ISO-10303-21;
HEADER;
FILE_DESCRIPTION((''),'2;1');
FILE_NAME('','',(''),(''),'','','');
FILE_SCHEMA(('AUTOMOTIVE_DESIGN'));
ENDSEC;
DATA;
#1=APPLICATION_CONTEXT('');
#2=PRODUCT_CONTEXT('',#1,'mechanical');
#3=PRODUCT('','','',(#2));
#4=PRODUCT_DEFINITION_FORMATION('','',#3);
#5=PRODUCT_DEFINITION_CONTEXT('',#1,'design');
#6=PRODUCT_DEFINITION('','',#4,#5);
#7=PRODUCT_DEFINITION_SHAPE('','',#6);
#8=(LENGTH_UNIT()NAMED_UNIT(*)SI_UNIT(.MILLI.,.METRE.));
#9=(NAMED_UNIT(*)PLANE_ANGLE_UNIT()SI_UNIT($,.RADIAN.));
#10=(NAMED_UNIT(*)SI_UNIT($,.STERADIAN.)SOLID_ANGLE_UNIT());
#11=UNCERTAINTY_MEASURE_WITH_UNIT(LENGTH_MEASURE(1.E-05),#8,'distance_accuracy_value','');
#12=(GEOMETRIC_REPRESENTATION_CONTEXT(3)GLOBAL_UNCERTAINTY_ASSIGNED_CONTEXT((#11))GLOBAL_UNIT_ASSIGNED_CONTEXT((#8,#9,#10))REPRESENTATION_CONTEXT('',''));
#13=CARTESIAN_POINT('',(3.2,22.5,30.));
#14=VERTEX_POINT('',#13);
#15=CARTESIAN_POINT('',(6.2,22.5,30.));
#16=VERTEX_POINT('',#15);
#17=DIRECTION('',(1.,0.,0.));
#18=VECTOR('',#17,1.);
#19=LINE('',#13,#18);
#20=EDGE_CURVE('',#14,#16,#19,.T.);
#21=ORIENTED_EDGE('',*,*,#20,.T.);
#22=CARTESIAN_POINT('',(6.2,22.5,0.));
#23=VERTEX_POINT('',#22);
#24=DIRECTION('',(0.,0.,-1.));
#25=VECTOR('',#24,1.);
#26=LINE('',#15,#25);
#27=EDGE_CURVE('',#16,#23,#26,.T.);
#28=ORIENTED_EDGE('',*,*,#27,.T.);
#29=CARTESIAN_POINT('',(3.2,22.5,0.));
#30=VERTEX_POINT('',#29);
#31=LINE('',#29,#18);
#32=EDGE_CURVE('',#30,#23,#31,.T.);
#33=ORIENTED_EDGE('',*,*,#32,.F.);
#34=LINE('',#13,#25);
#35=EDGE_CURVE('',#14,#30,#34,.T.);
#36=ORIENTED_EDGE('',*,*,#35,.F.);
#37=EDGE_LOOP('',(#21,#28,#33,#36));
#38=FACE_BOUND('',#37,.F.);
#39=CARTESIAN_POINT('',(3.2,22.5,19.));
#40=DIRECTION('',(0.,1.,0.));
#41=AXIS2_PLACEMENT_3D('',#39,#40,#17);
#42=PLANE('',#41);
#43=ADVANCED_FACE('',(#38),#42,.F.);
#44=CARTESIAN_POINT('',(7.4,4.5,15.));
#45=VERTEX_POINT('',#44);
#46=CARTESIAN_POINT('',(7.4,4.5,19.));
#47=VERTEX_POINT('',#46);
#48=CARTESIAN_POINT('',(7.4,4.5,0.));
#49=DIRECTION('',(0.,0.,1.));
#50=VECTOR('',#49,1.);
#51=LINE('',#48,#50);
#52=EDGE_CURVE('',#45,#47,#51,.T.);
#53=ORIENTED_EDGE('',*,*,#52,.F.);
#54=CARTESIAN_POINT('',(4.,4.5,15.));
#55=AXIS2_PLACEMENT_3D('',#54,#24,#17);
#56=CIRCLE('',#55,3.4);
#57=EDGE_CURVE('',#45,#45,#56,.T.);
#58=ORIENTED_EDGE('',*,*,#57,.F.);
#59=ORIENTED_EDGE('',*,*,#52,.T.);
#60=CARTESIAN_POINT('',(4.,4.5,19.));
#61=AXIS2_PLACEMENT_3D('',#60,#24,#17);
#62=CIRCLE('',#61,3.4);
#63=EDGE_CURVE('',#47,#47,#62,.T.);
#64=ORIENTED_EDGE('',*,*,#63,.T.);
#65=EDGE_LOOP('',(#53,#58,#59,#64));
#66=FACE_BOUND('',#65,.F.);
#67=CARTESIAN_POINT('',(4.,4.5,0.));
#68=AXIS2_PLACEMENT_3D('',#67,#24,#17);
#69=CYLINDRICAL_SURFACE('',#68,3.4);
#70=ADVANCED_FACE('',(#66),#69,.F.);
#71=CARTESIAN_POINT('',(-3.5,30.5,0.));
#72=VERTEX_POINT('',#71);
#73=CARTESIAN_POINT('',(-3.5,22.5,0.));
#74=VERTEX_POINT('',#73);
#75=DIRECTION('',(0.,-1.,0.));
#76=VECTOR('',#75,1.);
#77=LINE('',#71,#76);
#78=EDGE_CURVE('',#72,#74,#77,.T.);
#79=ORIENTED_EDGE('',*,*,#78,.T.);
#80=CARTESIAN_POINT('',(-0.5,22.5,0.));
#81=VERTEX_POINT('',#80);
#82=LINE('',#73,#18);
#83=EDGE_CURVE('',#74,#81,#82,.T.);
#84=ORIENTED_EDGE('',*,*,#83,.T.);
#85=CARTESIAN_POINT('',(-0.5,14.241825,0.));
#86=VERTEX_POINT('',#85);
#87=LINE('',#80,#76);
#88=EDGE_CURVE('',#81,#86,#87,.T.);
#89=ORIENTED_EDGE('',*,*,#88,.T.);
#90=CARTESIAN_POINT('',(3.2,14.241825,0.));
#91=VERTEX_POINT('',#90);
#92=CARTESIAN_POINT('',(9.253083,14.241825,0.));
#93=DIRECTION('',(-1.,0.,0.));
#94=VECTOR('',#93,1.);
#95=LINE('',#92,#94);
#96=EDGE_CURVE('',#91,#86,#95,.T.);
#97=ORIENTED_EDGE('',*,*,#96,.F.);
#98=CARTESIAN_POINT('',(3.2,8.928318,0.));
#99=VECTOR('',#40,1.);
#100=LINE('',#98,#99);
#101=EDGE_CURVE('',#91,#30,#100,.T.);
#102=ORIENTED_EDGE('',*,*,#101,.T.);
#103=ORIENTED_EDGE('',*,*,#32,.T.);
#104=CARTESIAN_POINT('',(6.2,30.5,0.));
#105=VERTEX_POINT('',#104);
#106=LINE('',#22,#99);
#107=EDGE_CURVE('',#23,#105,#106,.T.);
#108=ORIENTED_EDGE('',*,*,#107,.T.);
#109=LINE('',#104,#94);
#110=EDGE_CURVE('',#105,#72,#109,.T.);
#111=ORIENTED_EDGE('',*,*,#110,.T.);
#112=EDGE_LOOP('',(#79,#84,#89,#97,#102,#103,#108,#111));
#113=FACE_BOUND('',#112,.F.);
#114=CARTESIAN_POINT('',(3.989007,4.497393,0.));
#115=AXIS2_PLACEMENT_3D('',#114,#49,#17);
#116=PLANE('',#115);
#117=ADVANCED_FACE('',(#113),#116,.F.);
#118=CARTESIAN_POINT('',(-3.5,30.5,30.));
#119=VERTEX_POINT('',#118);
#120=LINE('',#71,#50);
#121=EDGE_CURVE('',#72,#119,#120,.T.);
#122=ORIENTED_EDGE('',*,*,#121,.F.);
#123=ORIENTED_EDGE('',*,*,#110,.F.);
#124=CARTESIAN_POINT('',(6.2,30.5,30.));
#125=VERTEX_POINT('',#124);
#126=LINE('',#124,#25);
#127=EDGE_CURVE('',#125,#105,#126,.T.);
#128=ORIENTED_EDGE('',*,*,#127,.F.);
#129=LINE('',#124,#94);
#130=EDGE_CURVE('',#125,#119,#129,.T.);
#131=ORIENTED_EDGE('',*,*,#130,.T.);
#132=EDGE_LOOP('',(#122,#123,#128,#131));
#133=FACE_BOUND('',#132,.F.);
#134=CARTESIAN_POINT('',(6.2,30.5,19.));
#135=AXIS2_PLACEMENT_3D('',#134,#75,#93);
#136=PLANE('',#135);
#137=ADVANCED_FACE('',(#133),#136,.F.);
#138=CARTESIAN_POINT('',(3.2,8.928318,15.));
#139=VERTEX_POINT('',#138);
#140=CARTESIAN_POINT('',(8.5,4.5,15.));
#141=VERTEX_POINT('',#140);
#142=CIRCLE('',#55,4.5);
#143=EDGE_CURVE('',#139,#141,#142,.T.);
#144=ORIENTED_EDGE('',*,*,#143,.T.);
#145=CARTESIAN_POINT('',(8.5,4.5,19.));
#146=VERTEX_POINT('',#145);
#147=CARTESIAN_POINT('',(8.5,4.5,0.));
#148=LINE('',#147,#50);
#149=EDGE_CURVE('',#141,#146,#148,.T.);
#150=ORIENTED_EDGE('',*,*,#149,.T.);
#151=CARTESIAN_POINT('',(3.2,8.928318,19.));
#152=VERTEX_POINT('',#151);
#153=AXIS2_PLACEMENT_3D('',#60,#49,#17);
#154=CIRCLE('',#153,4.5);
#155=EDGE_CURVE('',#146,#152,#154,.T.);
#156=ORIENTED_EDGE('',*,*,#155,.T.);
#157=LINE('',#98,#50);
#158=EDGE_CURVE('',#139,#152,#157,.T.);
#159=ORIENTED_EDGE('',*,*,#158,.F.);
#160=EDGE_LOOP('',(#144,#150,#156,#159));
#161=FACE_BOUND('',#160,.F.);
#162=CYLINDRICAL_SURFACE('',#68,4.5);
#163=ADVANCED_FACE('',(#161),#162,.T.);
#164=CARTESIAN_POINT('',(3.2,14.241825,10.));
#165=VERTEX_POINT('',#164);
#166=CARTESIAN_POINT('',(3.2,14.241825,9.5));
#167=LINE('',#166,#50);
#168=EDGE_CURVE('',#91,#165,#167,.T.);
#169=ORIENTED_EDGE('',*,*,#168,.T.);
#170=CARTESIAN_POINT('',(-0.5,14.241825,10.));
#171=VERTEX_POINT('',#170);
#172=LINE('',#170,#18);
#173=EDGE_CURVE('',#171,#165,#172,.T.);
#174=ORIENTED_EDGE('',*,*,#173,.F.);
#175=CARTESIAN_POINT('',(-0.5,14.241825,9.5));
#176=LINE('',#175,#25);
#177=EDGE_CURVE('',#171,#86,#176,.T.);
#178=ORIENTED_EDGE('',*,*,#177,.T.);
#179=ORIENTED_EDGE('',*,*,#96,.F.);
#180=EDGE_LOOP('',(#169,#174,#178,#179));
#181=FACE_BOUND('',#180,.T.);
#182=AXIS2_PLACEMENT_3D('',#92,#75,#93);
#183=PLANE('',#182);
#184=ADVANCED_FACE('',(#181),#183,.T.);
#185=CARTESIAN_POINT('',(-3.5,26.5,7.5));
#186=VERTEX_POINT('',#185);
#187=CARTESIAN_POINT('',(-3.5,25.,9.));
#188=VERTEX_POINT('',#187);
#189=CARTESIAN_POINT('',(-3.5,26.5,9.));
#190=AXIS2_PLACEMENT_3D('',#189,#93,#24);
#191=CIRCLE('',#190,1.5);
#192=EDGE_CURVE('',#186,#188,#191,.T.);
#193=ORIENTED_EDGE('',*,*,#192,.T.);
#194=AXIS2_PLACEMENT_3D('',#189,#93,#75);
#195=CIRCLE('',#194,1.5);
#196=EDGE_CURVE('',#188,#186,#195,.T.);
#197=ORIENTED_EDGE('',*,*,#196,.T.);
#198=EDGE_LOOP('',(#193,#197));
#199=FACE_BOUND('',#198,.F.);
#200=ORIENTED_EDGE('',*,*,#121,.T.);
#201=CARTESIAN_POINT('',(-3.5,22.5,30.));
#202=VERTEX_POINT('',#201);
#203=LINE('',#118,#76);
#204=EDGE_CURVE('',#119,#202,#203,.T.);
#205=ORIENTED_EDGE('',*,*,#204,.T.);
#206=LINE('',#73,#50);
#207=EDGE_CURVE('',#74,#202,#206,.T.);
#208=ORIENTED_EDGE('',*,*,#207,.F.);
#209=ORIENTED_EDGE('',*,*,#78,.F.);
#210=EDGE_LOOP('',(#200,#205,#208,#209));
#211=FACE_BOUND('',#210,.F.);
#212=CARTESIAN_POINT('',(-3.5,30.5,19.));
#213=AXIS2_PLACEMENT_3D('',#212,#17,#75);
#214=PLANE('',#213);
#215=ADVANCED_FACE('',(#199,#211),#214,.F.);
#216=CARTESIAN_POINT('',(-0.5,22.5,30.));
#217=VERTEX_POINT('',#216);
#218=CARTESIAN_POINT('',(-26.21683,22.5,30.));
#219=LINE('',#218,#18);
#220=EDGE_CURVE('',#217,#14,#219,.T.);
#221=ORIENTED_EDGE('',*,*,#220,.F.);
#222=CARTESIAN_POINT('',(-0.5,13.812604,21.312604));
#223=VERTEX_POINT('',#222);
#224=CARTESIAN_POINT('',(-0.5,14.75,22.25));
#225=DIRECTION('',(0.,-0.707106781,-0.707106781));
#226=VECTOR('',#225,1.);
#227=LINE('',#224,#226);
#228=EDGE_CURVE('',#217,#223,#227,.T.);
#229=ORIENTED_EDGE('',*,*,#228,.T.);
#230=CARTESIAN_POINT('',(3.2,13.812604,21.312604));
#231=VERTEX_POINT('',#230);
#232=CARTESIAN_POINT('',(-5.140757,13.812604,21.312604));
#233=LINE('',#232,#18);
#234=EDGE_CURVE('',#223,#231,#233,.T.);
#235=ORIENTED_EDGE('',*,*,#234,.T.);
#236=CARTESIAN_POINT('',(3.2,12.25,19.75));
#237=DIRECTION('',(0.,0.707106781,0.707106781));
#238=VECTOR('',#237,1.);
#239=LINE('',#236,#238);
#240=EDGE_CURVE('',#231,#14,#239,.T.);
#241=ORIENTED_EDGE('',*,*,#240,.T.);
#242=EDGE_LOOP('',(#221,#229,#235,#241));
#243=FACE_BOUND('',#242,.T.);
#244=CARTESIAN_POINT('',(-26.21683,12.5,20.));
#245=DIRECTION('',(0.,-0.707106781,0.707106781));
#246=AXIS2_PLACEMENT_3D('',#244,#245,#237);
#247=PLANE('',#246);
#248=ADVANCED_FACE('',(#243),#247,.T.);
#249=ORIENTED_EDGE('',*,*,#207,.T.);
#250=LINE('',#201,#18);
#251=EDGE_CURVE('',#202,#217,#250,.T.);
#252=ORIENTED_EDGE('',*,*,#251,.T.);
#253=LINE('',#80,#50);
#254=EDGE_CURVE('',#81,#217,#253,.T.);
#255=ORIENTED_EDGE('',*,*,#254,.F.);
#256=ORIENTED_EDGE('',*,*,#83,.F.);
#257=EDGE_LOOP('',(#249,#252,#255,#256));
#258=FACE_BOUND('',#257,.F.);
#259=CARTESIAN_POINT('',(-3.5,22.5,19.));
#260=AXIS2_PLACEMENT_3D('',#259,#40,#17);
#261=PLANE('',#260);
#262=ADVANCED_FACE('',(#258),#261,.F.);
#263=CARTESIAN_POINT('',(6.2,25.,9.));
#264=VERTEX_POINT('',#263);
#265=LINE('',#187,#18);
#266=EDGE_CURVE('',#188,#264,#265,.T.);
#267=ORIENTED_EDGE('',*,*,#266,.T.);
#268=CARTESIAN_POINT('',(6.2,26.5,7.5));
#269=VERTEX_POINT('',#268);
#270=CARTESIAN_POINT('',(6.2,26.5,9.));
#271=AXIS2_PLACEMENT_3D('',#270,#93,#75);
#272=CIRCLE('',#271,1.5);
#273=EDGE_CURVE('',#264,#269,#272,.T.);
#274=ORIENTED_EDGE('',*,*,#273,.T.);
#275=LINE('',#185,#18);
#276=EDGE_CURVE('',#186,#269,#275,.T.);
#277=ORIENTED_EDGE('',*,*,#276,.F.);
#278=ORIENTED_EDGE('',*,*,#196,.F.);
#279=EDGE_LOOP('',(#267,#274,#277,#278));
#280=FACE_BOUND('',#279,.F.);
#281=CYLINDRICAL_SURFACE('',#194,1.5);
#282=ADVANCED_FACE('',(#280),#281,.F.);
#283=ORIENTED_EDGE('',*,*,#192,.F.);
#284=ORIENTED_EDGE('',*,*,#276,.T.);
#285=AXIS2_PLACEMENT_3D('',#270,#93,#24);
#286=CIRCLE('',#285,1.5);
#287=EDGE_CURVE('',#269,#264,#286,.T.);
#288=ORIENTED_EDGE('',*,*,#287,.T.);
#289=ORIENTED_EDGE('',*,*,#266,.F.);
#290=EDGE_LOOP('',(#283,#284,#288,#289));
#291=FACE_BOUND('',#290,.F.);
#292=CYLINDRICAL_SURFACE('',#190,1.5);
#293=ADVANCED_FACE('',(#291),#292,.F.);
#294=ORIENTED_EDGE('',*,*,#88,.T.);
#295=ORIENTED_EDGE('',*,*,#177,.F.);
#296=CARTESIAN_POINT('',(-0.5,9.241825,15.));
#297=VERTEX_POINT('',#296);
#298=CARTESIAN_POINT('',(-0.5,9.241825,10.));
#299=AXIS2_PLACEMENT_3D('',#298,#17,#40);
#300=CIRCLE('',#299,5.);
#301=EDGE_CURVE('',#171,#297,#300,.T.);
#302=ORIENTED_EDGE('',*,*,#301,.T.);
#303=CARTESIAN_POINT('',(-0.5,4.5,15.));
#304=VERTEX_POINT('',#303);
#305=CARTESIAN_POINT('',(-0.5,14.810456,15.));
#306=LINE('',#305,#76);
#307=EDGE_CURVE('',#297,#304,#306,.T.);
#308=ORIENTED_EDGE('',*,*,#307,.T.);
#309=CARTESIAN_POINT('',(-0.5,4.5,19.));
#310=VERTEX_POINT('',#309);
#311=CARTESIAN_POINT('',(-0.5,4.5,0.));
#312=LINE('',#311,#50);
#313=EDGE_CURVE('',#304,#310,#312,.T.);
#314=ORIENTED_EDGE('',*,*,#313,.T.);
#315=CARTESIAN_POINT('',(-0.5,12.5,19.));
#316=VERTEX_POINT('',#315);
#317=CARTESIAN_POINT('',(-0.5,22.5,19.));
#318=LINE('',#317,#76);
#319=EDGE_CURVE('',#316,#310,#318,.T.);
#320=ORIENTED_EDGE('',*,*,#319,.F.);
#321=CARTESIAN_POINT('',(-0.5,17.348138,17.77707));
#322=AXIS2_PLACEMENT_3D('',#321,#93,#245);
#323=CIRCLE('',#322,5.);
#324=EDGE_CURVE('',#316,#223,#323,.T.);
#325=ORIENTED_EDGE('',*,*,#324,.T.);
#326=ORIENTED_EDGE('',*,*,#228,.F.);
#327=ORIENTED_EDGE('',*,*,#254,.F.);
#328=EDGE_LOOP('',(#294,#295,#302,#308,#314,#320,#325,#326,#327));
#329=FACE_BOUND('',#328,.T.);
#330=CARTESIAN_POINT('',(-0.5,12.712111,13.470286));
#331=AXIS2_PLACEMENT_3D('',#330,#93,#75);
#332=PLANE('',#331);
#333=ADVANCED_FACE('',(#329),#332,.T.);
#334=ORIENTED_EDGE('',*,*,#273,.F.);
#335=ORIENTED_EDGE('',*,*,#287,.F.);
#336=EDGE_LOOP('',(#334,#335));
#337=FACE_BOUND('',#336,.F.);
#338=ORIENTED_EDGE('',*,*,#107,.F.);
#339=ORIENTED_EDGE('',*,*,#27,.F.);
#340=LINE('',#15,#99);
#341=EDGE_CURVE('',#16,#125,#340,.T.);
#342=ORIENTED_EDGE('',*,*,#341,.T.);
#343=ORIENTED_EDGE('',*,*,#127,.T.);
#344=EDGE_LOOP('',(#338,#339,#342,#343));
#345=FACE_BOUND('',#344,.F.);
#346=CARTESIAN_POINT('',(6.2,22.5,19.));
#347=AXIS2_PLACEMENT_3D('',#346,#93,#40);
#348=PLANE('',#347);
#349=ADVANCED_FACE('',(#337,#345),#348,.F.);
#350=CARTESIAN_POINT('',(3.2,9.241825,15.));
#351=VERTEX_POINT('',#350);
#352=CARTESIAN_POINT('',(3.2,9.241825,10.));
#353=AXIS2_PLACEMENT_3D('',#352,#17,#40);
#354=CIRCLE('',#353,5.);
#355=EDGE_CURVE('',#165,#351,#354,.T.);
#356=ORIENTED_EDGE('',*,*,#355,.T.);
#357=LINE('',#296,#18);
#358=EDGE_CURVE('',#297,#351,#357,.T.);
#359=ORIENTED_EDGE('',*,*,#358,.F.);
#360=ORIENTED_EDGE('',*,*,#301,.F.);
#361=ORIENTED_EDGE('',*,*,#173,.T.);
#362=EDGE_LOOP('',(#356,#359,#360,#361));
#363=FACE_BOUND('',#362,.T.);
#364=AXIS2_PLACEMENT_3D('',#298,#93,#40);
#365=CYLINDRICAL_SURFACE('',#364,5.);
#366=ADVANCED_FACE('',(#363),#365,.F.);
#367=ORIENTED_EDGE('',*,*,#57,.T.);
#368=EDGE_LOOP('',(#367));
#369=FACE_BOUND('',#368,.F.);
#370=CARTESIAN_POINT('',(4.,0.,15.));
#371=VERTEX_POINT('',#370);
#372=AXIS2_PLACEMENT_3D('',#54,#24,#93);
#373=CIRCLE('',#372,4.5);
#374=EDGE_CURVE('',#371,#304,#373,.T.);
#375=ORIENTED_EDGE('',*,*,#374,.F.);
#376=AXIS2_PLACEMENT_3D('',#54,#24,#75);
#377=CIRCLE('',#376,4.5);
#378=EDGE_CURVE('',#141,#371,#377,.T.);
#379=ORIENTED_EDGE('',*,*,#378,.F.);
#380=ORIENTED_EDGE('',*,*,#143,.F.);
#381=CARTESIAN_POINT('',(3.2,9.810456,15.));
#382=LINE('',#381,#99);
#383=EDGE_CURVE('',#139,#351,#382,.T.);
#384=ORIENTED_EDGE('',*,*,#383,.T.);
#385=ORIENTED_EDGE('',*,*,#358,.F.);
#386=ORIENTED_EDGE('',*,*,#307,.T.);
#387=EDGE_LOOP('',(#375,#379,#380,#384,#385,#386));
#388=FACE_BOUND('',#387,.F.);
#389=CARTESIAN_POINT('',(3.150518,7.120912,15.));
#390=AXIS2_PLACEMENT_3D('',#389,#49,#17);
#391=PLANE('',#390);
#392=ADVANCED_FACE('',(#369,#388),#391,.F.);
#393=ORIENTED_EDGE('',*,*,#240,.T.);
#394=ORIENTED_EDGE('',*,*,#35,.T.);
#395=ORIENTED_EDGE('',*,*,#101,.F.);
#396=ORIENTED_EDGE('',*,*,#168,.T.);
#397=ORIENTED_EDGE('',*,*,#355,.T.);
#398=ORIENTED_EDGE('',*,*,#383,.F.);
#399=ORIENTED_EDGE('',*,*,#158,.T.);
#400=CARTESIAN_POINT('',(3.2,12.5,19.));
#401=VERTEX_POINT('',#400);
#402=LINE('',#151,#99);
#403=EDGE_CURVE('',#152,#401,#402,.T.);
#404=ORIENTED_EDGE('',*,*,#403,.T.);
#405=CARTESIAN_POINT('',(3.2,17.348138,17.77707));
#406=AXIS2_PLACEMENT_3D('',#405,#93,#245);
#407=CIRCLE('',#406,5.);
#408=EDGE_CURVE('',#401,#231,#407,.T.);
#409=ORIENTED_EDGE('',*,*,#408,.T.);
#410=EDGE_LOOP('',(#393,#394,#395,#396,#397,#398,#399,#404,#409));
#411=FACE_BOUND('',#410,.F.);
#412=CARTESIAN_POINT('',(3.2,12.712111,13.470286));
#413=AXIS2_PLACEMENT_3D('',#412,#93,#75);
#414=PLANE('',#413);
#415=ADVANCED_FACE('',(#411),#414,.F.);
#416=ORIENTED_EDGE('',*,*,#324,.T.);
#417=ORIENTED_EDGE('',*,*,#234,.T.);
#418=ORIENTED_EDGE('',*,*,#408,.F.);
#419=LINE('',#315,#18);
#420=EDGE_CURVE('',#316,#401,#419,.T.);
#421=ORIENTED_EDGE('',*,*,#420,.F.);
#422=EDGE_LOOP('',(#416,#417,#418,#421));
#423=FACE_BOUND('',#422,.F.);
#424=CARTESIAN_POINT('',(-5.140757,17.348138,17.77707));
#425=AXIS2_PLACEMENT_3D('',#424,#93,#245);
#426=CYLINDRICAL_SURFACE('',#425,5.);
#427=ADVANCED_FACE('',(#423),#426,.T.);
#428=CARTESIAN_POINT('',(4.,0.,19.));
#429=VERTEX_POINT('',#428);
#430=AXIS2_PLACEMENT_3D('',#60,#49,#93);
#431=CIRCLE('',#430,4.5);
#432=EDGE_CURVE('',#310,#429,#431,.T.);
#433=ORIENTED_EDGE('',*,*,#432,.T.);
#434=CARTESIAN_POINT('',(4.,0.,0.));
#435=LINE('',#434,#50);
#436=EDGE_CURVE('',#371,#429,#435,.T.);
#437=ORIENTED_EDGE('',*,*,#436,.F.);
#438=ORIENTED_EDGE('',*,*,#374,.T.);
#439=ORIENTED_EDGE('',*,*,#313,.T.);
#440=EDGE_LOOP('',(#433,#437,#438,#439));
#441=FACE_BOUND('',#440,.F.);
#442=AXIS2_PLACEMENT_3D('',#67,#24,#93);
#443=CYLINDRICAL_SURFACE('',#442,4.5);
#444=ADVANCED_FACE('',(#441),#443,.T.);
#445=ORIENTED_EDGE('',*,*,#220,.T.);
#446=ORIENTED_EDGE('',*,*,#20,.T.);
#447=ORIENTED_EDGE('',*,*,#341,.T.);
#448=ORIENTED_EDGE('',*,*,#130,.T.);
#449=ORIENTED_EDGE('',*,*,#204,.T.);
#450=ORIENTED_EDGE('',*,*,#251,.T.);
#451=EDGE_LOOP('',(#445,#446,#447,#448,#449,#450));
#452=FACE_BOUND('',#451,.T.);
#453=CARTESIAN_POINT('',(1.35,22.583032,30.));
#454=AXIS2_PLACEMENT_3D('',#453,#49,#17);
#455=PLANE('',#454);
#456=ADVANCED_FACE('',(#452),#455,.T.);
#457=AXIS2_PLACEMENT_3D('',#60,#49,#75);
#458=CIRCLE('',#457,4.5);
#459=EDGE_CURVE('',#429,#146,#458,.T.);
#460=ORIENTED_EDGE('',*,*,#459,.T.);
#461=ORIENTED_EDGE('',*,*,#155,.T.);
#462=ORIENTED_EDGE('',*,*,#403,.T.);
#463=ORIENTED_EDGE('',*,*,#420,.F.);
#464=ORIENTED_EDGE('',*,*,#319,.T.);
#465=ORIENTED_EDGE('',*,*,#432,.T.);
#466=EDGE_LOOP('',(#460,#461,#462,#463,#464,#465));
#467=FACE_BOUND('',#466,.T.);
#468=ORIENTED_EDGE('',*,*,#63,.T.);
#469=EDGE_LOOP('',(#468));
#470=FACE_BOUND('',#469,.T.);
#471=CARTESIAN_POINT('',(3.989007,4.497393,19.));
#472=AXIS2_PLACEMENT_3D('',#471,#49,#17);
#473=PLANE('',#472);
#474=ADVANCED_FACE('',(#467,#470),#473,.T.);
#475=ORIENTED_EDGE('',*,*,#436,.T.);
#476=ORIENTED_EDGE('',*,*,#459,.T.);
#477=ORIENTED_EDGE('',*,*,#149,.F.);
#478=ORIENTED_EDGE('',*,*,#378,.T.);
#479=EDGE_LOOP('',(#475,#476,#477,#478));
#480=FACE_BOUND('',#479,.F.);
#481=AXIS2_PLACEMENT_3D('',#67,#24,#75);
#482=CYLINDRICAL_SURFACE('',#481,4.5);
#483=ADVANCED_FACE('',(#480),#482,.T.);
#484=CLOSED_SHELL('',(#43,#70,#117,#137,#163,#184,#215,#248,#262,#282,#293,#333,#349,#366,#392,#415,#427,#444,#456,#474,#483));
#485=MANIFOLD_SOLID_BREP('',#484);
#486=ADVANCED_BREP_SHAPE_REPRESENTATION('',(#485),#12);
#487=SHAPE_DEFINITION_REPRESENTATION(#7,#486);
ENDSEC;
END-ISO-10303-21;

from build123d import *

# Parameters (mm, degrees)
F1_DEPTH     = 19
F3_DEPTH     = 11
F4_R         = 3.4
F5_DEPTH     = 25
F8_DEPTH     = 25
F9_T1_DEPTH  = 55.1336597593
F10_DEPTH    = 15
F11_T1_DEPTH = 3.7
F11_T3_DEPTH = 12.9815131525


# Not quite as in the source:
# - a fillet or chamfer that OpenCascade refuses, or shapes differently, is made with other operations: its cross-section is extruded or revolved along the edge and cut away or added


with BuildPart() as f1:
    # F0 (on Top) → F1 (new body)
    with BuildSketch(Plane.XY):
        with BuildLine():
            ThreePointArc((4, 0), (7.1819805153, 1.3180194847), (8.5, 4.5))
            ThreePointArc((8.5, 4.5), (6.8853076093, 7.95325933), (3.2, 8.9283179651))
            ThreePointArc((3.2, 8.9283179651), (0.54674067, 7.3853076093), (-0.5, 4.5))
            ThreePointArc((-0.5, 4.5), (0.8180194847, 1.3180194847), (4, 0))
        make_face()
        with BuildLine():
            ThreePointArc((-0.5, 4.5), (0.54674067, 7.3853076093), (3.2, 8.9283179651))
            Line((3.2, 8.9283179651), (3.2, 22.5))
            Line((3.2, 22.5), (6.2, 22.5))
            Line((6.2, 22.5), (6.2, 30.5))
            Line((6.2, 30.5), (-3.5, 30.5))
            Line((-3.5, 30.5), (-3.5, 22.5))
            Line((-3.5, 22.5), (-0.5, 22.5))
            Line((-0.5, 22.5), (-0.5, 4.5))
        make_face()
    extrude(amount=F1_DEPTH)

    # F2 (on face) → F3 (join)
    with BuildSketch(Plane.XY.offset(19)):
        Polygon((6.2, 30.5), (-3.5, 30.5), (-3.5, 22.5), (-0.5, 22.5), (-0.5, 12.5), (3.2, 12.5), (3.2, 22.5), (6.2, 22.5), align=None)
    extrude(amount=F3_DEPTH)

    # F4 (on face) → F5 (cut)
    with BuildSketch(Plane(origin=(0, 0, 0), x_dir=(1, 0, 0), z_dir=(0, 0, -1))):
        with Locations((4, -4.5)):
            Circle(F4_R)
    extrude(amount=-F5_DEPTH, mode=Mode.SUBTRACT)

    # F7 (on face) → F8 (cut)
    with BuildSketch(Plane(origin=(-3.5, 0, 0), x_dir=(0, -1, 0), z_dir=(-1, 0, 0))):
        with BuildLine():
            ThreePointArc((-26.5, 7.5), (-25.4393398282, 7.9393398282), (-25, 9))
            ThreePointArc((-25, 9), (-27.5606601718, 10.0606601718), (-26.5, 7.5))
        make_face()
    extrude(amount=-F8_DEPTH, mode=Mode.SUBTRACT)

    # F9: chamfer of 10 on 1 edges, made by hand

    # F9_s2 → F9_t1 (cut)
    with BuildSketch(Plane.YZ.offset(-26.2168298797)):
        Polygon((12.5, 20), (22.5, 30), (12.5, 30), align=None)
    extrude(amount=F9_T1_DEPTH, mode=Mode.SUBTRACT)

    # F6 (on Top) → F10 (cut)
    with BuildSketch(Plane.XY):
        Polygon((-2.952047158, 0), (0, 0), (4.1492179482, 0), (5.4492179482, 0), (9.2530830997, 0), (9.2530830997, 9.0487509014), (9.2530830997, 14.2418248579), (-2.952047158, 14.2418248579), align=None)
    extrude(amount=F10_DEPTH, mode=Mode.SUBTRACT)

    # F11: fillet of radius 5 on 2 edges, made by hand

    # F11_s2 → F11_t1 (join)
    with BuildSketch(Plane.YZ.offset(-0.5)):
        with BuildLine():
            ThreePointArc((14.2418248579, 10), (12.7773587638, 13.5355339059), (9.2418248579, 15))
            Line((9.2418248579, 15), (14.2418248579, 15))
            Line((14.2418248579, 15), (14.2418248579, 10))
        make_face()
    extrude(amount=F11_T1_DEPTH)

    # F11_s4 → F11_t3 (cut)
    with BuildSketch(Plane.YZ.offset(-5.1407565762)):
        with BuildLine():
            ThreePointArc((13.812604178, 21.312604178), (12.9997448715, 20.2451619378), (12.5, 19))
            Line((12.5, 19), (12.5, 20))
            Line((12.5, 20), (13.812604178, 21.312604178))
        make_face()
    extrude(amount=F11_T3_DEPTH, mode=Mode.SUBTRACT)


solid = f1.part
